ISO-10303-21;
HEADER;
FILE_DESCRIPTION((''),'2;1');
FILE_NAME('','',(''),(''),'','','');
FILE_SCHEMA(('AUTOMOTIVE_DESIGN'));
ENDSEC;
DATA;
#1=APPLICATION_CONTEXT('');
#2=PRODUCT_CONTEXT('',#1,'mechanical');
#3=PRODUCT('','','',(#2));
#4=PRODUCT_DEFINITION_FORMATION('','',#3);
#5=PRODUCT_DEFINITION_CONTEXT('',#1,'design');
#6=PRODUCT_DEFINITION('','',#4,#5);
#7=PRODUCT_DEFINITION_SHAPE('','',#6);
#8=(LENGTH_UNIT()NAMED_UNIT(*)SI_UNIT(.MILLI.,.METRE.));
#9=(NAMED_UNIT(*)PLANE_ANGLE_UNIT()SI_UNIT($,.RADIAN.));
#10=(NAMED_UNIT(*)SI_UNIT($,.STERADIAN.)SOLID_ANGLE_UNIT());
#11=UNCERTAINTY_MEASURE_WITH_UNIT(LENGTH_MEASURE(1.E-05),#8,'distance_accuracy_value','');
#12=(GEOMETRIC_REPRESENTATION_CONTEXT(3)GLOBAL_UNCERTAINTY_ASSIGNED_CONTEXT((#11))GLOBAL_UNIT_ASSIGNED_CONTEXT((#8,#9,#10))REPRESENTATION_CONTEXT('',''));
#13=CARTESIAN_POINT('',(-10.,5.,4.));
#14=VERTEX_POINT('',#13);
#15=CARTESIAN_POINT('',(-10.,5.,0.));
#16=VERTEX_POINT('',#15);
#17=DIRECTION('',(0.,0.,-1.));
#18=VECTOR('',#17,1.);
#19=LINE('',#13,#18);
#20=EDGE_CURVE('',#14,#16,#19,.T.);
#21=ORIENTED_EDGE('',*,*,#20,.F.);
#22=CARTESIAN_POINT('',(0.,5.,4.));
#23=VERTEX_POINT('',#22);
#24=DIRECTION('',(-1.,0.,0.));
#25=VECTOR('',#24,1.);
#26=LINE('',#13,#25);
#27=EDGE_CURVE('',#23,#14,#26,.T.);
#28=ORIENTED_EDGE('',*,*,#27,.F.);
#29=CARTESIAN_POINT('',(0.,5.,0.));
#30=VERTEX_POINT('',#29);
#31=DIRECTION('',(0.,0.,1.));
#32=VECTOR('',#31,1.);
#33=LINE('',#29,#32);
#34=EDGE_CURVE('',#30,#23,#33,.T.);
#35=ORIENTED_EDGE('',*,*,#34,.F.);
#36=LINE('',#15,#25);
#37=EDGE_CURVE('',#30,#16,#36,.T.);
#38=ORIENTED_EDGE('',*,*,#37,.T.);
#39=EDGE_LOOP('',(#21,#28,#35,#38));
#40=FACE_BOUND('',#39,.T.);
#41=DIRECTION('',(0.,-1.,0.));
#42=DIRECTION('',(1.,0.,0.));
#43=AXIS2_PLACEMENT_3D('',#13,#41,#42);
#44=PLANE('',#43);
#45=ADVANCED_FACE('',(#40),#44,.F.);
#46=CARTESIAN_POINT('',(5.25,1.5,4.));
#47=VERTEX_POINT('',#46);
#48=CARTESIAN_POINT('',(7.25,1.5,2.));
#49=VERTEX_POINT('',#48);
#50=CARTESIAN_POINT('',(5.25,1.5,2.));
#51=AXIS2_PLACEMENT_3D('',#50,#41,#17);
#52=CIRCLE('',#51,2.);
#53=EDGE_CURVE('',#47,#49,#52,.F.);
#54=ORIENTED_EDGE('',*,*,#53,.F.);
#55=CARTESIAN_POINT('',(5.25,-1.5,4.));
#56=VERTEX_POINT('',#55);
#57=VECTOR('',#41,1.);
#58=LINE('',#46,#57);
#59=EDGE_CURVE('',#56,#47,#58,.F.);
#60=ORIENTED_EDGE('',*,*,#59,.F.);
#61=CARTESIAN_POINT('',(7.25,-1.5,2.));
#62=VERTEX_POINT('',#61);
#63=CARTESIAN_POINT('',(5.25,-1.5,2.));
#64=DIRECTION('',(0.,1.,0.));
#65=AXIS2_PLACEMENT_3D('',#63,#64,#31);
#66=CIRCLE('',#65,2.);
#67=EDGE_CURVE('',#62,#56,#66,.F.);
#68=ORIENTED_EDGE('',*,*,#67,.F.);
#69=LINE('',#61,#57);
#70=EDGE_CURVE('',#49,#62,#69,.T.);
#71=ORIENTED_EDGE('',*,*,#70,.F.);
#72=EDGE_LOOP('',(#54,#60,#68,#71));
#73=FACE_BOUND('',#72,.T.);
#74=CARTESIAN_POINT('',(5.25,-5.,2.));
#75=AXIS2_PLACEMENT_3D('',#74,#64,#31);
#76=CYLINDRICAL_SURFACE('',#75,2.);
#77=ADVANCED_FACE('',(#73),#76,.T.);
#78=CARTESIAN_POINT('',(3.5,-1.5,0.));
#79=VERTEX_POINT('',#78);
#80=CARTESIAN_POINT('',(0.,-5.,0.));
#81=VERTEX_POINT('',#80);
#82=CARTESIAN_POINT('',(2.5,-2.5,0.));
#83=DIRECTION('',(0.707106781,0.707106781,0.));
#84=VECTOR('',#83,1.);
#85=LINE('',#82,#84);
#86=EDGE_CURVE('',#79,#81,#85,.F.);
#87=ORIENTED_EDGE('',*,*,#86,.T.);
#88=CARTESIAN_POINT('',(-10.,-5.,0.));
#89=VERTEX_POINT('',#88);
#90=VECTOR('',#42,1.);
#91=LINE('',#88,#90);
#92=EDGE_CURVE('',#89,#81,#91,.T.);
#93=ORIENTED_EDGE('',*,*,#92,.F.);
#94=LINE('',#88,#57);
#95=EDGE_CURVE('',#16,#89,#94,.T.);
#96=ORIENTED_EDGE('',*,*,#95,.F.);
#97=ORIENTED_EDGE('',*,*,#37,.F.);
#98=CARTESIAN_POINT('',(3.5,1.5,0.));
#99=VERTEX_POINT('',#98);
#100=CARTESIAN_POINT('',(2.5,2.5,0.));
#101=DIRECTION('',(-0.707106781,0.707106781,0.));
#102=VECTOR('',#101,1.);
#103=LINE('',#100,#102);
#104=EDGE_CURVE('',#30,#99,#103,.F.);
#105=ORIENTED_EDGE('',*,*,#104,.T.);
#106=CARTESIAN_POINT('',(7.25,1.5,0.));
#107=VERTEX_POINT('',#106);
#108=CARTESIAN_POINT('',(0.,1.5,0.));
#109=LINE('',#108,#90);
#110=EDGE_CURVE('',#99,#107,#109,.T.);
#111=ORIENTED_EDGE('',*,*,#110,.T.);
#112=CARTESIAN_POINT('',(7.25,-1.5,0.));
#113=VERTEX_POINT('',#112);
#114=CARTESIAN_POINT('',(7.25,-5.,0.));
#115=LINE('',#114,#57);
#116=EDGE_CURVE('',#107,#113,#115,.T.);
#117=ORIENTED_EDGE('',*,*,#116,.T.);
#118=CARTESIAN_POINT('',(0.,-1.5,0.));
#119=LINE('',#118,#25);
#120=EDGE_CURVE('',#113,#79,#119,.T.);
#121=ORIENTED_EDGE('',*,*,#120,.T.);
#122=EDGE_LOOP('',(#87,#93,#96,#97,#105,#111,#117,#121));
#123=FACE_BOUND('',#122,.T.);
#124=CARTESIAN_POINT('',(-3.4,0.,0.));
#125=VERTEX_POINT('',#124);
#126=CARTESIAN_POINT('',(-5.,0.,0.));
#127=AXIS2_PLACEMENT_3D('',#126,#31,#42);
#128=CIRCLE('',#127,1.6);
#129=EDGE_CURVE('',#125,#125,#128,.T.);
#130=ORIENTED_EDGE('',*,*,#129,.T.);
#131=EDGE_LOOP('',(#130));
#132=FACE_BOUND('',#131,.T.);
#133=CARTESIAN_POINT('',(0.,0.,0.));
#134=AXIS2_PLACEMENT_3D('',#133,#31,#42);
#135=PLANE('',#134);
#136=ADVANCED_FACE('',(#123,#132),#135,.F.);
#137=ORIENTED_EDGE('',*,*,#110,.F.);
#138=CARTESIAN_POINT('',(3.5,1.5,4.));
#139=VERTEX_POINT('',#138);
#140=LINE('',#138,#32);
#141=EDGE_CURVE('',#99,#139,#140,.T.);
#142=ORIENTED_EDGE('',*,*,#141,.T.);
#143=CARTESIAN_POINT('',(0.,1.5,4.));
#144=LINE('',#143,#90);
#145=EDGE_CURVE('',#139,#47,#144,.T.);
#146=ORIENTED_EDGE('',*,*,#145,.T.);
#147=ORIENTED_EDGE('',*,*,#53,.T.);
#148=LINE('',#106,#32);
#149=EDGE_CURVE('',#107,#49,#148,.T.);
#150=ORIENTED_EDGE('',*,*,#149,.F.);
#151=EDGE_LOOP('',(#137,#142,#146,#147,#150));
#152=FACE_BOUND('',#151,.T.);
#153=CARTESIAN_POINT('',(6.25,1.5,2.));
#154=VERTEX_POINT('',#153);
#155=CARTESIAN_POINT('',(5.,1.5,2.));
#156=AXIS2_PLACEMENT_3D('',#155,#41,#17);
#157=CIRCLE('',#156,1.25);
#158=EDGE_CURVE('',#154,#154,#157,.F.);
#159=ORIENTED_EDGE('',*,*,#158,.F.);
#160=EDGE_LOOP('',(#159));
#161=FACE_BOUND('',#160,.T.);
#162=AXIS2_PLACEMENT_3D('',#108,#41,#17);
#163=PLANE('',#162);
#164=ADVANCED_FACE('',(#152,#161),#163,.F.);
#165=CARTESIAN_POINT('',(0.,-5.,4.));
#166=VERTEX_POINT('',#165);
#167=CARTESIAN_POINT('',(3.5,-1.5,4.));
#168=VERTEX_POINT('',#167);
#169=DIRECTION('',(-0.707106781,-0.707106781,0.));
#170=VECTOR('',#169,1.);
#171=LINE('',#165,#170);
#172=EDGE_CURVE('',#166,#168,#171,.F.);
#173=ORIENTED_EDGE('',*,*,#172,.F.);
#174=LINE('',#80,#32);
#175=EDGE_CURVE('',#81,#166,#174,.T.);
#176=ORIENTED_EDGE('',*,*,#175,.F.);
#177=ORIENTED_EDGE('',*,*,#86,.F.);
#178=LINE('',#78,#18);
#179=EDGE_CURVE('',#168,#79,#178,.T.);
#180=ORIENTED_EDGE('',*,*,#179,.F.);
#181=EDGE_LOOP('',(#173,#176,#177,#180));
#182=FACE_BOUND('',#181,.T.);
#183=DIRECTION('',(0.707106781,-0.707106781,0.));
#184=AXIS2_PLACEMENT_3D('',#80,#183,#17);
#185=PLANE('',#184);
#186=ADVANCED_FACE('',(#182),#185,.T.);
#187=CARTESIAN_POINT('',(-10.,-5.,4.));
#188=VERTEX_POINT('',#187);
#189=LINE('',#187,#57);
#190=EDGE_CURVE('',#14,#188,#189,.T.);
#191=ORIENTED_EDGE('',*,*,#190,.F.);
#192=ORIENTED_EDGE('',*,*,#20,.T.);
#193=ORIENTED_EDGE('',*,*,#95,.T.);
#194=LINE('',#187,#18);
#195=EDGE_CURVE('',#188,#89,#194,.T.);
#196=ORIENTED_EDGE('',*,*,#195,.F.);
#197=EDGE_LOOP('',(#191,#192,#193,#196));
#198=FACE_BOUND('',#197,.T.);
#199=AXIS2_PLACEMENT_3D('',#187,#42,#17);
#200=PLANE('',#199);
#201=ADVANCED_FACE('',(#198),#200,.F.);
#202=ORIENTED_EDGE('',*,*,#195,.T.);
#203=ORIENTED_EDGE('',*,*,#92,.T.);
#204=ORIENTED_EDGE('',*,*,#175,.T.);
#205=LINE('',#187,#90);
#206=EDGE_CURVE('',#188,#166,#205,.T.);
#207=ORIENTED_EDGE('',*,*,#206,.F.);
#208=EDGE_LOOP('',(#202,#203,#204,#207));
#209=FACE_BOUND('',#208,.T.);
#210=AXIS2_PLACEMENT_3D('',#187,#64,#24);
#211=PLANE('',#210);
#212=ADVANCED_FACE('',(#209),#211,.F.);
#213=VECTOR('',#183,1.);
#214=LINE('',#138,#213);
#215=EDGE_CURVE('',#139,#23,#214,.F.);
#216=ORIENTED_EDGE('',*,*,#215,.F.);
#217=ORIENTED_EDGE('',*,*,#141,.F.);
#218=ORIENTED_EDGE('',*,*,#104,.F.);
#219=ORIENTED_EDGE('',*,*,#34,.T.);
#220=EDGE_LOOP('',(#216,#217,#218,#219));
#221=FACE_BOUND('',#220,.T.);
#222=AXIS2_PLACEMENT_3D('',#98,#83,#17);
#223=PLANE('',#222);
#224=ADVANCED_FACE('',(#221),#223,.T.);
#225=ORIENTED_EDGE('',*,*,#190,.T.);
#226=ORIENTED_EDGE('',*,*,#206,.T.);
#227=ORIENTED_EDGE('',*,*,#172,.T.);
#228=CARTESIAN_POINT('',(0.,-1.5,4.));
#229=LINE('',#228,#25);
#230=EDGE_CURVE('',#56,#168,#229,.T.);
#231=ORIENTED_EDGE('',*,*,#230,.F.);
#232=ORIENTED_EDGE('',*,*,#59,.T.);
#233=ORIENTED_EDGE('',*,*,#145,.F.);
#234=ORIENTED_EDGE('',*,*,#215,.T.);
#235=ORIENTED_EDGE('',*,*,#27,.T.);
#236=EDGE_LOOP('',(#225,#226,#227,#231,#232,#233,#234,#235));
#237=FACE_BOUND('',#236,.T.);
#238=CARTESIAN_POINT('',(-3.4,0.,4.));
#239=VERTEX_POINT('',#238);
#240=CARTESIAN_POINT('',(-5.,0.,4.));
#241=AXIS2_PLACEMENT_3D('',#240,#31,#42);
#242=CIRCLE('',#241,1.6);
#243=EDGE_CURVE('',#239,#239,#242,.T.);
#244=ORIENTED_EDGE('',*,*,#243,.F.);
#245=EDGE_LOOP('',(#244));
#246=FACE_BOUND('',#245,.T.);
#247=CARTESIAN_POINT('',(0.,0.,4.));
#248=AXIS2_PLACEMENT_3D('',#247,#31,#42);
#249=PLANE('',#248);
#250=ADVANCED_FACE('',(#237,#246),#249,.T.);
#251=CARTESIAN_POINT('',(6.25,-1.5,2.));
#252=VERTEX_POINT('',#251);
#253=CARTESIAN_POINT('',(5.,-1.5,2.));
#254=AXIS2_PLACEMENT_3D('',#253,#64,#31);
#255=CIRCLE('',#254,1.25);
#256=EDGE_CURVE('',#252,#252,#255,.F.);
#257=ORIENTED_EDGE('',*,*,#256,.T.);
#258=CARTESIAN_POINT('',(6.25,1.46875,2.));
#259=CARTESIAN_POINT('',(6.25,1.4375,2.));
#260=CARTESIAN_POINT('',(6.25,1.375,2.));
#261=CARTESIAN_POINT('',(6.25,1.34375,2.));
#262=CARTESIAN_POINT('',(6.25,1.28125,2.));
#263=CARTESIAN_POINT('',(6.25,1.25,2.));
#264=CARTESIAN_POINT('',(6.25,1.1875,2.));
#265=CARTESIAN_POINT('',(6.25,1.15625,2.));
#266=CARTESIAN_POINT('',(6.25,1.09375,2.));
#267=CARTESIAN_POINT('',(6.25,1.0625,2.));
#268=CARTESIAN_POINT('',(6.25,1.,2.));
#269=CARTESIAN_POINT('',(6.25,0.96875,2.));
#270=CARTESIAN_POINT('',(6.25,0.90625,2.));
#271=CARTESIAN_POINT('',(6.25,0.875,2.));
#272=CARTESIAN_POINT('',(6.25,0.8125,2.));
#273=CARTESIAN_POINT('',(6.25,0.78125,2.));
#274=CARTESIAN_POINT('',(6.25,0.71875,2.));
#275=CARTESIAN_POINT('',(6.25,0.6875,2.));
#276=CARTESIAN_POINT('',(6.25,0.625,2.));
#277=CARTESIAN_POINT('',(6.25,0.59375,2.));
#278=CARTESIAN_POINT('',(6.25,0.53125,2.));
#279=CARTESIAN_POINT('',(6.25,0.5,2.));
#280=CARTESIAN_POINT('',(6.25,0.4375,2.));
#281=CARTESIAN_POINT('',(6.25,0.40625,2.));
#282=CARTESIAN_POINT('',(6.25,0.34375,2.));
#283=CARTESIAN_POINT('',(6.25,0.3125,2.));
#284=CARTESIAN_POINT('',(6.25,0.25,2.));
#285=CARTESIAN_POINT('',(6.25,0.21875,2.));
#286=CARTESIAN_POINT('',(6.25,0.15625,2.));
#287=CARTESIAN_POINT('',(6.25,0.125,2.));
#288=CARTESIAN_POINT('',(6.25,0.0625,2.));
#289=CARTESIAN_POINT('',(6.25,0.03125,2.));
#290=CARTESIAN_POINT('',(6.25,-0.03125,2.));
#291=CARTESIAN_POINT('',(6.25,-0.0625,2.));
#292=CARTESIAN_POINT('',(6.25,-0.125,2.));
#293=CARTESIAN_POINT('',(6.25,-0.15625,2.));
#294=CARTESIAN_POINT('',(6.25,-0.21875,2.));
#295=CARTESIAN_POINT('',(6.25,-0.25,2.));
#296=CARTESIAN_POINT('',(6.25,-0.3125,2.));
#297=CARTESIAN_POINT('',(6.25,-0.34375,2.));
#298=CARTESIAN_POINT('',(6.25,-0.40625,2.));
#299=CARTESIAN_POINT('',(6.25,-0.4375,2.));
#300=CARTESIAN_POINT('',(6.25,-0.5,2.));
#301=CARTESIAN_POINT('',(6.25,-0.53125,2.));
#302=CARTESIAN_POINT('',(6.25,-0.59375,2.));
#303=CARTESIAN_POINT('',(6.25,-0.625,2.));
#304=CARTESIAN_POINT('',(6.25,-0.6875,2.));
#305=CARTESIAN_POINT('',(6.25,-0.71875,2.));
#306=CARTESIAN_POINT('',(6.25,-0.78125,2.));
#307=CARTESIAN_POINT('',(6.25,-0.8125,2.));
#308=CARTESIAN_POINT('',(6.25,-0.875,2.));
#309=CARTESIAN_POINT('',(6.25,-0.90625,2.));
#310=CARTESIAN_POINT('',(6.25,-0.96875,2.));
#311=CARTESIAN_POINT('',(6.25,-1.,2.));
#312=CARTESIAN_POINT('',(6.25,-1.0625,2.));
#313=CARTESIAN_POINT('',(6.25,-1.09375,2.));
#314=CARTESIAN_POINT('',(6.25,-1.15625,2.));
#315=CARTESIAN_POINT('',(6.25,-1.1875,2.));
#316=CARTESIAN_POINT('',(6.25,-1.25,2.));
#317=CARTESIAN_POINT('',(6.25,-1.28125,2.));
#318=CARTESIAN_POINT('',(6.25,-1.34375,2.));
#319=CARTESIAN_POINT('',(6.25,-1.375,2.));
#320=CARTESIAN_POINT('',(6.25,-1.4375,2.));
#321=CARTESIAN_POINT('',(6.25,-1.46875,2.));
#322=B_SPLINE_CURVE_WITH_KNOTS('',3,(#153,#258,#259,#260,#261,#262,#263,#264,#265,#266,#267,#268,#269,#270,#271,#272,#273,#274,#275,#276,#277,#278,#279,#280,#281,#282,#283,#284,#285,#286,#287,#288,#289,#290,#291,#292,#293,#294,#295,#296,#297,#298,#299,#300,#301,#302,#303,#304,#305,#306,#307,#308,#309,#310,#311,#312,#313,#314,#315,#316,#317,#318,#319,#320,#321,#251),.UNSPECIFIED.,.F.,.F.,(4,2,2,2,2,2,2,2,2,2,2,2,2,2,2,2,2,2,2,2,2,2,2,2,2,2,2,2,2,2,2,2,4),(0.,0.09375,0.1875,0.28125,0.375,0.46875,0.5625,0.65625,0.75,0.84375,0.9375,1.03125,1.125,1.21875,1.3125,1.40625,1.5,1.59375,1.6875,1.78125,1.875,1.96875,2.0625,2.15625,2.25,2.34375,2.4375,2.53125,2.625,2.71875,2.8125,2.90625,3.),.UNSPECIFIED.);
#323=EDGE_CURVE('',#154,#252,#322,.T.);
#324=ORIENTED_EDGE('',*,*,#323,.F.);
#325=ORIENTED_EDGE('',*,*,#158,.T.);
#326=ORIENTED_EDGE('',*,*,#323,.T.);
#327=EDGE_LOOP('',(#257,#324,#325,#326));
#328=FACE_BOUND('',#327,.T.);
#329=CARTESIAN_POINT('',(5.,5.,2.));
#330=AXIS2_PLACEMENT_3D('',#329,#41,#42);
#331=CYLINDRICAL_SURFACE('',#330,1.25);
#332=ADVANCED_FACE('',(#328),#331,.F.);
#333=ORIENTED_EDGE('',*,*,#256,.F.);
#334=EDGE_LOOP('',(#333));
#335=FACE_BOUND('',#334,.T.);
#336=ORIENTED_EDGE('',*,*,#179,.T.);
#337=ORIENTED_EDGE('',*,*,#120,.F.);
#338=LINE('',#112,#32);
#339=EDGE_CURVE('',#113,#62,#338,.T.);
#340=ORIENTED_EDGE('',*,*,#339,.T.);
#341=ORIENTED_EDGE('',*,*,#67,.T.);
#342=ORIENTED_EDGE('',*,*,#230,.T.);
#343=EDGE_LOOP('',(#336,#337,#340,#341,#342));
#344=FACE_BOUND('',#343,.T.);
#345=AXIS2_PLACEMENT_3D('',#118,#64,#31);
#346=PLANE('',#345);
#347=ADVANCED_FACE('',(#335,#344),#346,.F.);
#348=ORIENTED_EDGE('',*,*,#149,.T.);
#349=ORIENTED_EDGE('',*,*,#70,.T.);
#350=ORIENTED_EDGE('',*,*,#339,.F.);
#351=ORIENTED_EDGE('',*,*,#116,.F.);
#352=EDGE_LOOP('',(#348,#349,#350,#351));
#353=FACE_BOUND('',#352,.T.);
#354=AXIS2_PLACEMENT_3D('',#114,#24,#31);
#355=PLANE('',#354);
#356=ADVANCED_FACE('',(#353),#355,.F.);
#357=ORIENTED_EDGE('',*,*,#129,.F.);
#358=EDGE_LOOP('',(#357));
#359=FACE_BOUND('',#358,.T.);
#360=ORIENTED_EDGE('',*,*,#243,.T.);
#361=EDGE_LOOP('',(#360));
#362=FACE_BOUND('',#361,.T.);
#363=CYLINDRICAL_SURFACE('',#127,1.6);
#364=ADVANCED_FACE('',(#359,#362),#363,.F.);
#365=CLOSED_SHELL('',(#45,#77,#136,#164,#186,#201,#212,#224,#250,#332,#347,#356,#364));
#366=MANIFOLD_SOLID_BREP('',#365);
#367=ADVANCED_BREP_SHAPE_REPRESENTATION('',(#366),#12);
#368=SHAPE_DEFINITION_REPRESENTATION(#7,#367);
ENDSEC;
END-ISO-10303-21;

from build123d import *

# Parameters (mm, degrees)
SKETCH1_W           = 10
SKETCH1_H           = 20
BOSS_EXTRUDE1_DEPTH = 4
SKETCH2_R           = 1.6
CUT_EXTRUDE1_DEPTH  = 12.874342087
SKETCH3_R           = 1.25
CUT_EXTRUDE2_DEPTH  = 15.696938457
SKETCH4_W           = 2.75
SKETCH4_H           = 10
CUT_EXTRUDE3_DEPTH  = 12.874342087
SKETCH5_W           = 7.25
SKETCH5_H           = 3.5
CUT_EXTRUDE4_DEPTH  = 12.874342087
CHAMFER1_SIZE       = 3.5
FILLET1_R           = 2


with BuildPart() as part:
    # Sketch1 → Boss-Extrude1 (new body)
    with BuildSketch(Plane(origin=(0, 0, 0), x_dir=(0, 1, 0), z_dir=(0, 0, 1))):
        Rectangle(SKETCH1_W, SKETCH1_H)
    extrude(amount=BOSS_EXTRUDE1_DEPTH)

    # Sketch2 → Cut-Extrude1 (cut, through all)
    with BuildSketch(Plane.XY.offset(4)):
        with Locations((-5, 0)):
            Circle(SKETCH2_R)
    extrude(amount=-CUT_EXTRUDE1_DEPTH, mode=Mode.SUBTRACT)

    # Sketch3 → Cut-Extrude2 (cut, through all)
    with BuildSketch(Plane.XZ.offset(5)):
        with Locations((5, 2)):
            Circle(SKETCH3_R)
    extrude(amount=-CUT_EXTRUDE2_DEPTH, mode=Mode.SUBTRACT)

    # Sketch4 → Cut-Extrude3 (cut, through all)
    with BuildSketch(Plane.XY.offset(4)):
        with Locations((8.625, 0)):
            Rectangle(SKETCH4_W, SKETCH4_H)
    extrude(amount=-CUT_EXTRUDE3_DEPTH, mode=Mode.SUBTRACT)

    # Sketch5 → Cut-Extrude4 (cut, through all)
    with BuildSketch(Plane.XY.offset(4)):
        with Locations((3.625, 3.25)):
            Rectangle(SKETCH5_W, SKETCH5_H)
        with Locations((3.625, -3.25)):
            Rectangle(SKETCH5_W, SKETCH5_H)
    extrude(amount=-CUT_EXTRUDE4_DEPTH, mode=Mode.SUBTRACT)

    # Chamfer1
    chamfer1_edges = [part.edges().sort_by_distance(p)[0] for p in [
        (0, 1.5, 2),
        (0, -1.5, 2),
    ]]
    chamfer(chamfer1_edges, length=CHAMFER1_SIZE - 0.0001)  # a hair under: the kernel refuses the full size

    # Fillet1
    fillet1_edges = [part.edges().sort_by_distance(p)[0] for p in [
        (7.25, 0, 4),
    ]]
    fillet(fillet1_edges, radius=FILLET1_R)


solid = part.part
